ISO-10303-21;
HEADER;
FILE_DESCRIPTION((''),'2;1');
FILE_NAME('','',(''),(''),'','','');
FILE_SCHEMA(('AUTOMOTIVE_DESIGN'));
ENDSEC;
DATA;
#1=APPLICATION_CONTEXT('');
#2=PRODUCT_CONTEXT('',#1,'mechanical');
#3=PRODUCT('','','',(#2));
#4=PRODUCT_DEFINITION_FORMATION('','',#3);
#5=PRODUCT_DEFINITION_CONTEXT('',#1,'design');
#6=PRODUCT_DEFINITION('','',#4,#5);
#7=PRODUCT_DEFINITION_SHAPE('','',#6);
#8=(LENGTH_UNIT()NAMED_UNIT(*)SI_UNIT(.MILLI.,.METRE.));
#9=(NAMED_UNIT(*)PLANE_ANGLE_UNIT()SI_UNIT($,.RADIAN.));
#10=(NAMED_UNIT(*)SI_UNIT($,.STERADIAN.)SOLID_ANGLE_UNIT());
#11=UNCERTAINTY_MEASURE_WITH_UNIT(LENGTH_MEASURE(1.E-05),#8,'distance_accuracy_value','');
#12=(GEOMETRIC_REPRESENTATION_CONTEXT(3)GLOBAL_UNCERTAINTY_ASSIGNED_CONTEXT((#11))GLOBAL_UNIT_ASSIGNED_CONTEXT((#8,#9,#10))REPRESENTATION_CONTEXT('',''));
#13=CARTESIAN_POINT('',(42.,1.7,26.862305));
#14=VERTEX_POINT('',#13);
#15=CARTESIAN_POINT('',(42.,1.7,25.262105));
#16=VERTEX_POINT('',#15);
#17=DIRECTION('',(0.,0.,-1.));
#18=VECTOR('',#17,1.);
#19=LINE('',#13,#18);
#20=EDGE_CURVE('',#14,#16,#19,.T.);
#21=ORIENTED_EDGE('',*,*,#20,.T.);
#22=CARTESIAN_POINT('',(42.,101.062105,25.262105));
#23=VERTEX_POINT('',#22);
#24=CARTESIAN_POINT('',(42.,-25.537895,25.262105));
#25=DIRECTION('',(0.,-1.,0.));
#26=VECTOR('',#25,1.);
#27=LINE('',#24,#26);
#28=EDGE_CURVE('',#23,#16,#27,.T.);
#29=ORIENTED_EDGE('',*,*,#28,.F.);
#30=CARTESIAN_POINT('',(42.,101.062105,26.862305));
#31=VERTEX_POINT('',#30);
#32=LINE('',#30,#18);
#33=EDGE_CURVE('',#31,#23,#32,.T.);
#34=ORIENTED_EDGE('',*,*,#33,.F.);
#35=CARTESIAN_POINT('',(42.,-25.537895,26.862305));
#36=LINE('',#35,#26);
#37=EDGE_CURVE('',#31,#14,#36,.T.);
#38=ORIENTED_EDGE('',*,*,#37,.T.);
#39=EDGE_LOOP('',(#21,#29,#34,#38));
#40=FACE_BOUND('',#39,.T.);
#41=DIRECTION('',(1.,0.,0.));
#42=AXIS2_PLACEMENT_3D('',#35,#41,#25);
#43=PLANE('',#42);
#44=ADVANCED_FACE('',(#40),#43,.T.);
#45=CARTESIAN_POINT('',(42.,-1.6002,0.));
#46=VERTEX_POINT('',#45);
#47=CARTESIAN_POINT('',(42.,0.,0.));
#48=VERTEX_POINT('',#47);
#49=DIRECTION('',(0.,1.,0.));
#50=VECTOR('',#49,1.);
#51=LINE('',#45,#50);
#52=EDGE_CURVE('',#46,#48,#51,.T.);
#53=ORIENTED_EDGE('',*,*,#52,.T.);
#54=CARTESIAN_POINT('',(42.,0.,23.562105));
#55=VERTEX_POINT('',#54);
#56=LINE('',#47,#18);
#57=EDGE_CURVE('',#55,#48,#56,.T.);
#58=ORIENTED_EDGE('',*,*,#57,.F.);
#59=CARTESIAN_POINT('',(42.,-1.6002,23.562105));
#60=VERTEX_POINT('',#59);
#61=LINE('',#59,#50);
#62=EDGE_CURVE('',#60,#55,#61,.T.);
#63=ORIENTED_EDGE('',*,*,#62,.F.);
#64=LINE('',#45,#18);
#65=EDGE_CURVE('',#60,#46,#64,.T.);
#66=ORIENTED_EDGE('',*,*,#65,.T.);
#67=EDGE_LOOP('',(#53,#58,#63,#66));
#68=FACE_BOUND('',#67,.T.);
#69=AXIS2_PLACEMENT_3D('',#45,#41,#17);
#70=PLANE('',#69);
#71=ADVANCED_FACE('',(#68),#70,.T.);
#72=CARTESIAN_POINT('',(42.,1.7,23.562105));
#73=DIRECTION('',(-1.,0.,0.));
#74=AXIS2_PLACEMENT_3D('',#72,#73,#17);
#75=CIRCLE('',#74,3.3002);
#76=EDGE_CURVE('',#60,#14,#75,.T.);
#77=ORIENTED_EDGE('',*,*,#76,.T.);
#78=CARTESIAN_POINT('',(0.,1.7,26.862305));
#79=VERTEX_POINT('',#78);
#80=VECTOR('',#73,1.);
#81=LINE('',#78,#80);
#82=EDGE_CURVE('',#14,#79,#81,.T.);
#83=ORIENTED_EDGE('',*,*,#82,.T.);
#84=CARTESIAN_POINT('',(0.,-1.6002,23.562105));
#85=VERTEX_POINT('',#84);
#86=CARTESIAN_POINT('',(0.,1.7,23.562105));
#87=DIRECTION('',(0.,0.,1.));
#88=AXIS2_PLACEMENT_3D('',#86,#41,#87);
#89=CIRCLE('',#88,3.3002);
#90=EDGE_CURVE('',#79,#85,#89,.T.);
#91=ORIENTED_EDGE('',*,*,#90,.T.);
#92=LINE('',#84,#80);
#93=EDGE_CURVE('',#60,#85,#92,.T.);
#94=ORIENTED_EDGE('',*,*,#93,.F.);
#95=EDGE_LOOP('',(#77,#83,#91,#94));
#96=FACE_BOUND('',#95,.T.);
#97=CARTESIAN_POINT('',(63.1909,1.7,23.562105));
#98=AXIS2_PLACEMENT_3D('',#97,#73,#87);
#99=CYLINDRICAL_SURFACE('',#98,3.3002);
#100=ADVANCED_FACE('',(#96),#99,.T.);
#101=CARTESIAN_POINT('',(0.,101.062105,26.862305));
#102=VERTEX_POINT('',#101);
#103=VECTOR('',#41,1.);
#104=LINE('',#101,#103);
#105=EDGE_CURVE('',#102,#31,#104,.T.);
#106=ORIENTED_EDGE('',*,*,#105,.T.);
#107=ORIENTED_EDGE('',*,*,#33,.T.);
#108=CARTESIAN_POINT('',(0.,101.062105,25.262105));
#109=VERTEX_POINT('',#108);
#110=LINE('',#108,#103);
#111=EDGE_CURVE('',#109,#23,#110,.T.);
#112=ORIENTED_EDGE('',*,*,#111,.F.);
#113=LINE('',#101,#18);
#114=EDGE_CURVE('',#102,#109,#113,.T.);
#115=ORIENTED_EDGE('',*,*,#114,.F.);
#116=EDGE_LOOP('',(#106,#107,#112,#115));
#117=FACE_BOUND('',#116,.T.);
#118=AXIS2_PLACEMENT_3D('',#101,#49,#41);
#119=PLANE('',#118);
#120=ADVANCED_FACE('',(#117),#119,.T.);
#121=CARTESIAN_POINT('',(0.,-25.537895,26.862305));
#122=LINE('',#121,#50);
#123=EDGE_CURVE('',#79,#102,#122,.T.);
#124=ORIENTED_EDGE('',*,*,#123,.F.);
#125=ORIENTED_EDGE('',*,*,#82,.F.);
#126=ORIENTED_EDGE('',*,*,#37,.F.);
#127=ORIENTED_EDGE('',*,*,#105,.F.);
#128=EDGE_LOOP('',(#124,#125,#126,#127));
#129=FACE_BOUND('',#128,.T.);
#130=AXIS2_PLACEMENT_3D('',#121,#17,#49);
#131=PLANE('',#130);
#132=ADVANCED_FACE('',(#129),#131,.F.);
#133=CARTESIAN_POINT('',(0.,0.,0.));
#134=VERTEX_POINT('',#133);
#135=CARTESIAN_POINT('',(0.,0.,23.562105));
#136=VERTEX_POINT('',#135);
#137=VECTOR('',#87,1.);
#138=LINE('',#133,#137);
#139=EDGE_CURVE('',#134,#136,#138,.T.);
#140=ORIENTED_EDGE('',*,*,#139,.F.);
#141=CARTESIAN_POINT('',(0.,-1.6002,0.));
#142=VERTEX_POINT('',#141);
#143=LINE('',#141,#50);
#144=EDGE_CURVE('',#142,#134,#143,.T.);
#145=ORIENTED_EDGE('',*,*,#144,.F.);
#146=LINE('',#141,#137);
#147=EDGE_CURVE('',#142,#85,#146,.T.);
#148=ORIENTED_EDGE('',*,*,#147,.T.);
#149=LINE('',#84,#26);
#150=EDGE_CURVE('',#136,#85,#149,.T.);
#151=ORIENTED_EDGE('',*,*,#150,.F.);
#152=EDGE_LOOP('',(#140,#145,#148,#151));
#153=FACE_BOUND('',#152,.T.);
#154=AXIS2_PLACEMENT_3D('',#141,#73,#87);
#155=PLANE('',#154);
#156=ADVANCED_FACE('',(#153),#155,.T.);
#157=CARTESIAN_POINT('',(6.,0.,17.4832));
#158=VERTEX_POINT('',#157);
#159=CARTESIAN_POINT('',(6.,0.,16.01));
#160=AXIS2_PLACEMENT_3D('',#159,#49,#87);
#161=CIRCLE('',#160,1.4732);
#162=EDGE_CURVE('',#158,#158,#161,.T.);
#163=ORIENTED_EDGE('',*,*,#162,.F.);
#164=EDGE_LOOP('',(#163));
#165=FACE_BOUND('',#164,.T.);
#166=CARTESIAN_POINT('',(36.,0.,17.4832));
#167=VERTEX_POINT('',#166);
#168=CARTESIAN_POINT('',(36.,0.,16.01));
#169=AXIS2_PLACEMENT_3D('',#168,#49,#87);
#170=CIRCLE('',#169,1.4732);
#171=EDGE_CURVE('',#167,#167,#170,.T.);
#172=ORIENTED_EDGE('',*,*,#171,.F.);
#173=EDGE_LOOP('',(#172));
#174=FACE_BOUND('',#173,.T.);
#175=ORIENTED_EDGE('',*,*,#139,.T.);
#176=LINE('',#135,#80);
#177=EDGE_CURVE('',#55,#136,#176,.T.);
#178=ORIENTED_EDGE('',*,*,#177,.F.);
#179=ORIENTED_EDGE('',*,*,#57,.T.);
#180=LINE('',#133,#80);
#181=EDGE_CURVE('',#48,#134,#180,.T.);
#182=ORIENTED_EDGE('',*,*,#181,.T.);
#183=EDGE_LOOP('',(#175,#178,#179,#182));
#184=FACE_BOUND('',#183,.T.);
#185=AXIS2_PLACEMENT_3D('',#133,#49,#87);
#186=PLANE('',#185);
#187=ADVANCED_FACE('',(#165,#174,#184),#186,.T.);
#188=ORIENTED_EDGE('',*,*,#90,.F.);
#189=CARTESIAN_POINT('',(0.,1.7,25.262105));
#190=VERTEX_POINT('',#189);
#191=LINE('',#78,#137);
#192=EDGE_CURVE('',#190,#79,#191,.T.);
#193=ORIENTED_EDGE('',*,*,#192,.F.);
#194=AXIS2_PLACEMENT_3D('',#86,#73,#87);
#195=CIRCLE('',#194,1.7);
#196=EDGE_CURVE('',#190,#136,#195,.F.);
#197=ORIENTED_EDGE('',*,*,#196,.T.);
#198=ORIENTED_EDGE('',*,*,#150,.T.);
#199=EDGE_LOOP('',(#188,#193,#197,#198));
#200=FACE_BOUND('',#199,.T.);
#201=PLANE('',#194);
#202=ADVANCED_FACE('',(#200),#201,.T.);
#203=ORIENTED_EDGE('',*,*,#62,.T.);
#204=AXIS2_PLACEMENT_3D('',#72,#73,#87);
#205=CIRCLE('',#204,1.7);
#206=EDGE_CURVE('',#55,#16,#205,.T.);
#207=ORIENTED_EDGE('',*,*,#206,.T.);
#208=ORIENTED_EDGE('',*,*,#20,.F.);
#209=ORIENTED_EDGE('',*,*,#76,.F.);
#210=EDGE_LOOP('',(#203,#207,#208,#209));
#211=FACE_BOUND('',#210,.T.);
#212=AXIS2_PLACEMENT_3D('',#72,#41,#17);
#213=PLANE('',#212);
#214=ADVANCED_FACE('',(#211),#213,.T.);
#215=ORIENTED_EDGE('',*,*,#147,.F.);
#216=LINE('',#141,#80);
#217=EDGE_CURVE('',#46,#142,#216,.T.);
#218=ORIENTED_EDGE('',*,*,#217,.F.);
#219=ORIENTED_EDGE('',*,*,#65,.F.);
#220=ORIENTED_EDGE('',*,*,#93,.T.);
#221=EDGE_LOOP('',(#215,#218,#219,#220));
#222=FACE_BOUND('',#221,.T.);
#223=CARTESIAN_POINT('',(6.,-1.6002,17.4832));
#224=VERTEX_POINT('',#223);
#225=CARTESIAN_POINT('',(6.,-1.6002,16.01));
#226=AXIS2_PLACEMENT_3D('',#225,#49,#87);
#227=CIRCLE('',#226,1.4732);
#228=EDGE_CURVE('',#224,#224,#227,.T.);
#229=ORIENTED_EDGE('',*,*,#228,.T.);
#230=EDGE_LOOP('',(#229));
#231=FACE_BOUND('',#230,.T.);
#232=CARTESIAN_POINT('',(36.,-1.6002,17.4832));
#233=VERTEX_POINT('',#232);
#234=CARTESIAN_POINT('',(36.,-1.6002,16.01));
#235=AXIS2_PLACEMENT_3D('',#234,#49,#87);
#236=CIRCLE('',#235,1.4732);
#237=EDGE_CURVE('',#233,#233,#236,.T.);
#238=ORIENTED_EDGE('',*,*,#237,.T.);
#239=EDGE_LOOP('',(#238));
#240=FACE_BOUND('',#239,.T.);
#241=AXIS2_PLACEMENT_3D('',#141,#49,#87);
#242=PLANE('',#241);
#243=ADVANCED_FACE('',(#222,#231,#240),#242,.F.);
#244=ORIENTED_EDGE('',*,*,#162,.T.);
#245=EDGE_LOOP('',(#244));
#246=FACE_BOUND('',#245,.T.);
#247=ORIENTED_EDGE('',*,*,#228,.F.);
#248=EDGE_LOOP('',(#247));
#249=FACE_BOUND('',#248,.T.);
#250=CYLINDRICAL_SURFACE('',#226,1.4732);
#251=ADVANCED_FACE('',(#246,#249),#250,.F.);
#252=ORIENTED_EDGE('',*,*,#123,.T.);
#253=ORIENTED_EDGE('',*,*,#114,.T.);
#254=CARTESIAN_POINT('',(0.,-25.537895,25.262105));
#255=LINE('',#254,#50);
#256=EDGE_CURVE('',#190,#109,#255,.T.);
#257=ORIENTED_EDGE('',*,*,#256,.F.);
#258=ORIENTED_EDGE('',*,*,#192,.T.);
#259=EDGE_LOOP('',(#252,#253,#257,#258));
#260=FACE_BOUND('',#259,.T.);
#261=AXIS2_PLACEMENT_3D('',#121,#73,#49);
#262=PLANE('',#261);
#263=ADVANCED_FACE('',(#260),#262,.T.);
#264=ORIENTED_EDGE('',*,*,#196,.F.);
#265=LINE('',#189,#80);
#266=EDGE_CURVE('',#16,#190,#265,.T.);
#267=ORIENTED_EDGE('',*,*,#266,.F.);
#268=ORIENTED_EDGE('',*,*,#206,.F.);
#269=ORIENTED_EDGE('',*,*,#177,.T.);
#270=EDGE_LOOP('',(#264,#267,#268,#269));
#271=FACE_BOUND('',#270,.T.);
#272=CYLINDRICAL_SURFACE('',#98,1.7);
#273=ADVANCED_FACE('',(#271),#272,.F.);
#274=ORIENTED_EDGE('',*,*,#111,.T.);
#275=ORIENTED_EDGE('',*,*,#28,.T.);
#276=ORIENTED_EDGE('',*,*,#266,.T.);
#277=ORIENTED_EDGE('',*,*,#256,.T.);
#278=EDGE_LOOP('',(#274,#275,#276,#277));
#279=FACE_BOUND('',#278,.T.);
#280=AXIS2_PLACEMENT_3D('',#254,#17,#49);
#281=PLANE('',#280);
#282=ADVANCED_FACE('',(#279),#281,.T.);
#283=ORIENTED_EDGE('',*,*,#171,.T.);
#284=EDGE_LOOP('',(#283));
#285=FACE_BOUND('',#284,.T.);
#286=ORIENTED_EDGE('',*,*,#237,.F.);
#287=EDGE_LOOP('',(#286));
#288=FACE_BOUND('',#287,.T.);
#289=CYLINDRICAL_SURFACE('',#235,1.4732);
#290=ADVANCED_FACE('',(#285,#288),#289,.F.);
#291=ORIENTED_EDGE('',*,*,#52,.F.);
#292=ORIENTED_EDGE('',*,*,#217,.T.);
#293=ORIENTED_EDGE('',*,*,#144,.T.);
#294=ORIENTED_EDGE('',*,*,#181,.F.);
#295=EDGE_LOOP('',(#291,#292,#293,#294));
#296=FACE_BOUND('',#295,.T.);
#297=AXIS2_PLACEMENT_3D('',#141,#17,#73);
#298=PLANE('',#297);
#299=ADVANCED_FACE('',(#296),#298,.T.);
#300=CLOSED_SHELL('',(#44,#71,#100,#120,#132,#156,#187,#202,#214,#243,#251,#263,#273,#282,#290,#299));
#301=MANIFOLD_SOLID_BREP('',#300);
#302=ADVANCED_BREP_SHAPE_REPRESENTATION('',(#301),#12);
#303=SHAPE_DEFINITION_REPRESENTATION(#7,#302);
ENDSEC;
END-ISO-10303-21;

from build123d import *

# Parameters (mm, degrees)
SKETCH1_W              = 42
SKETCH1_H              = 126.6
SKETCH1_R              = 1.4732
BASE_FLANGE1_DEPTH     = 1.6002
SKETCHED_BEND1_DEPTH   = 42
SKETCHED_BEND1_2_DEPTH = 42


# Read off the part's stored shape, not the designer's step: Sketched Bend1
# Sheet-metal steps are written as plain solids
with BuildPart() as part:
    # Sketch1 → Base-Flange1 (new body)
    with BuildSketch(Plane(origin=(0, 0, 0), x_dir=(1, 0, 0), z_dir=(0, 1, 0))):
        with Locations((21, -63.3)):
            Rectangle(SKETCH1_W, SKETCH1_H)
        with Locations(Location((6, -16.01, 0), (0, 0, 270))):
            Circle(SKETCH1_R, mode=Mode.SUBTRACT)
        with Locations(Location((36, -16.01, 0), (0, 0, 270))):
            Circle(SKETCH1_R, mode=Mode.SUBTRACT)
    extrude(amount=-BASE_FLANGE1_DEPTH)

    # Sketched Bend1 outline → Sketched Bend1 (cut)
    with BuildSketch(Plane.YZ):
        with BuildLine():
            ThreePointArc((-1.6002, 23.562105466), (-1.172425807, 25.187063933), (0, 26.390765933))
            Line((0, 26.390765933), (0, 126.6))
            Line((0, 126.6), (-1.6002, 126.6))
            Line((-1.6002, 126.6), (-1.6002, 23.562105466))
        make_face()
    extrude(amount=SKETCHED_BEND1_DEPTH, mode=Mode.SUBTRACT)

    # Sketched Bend1 2 outline → Sketched Bend1 2 (add)
    with BuildSketch(Plane.YZ):
        with BuildLine():
            ThreePointArc((0, 23.562105466), (0.497918472, 24.764186994), (1.7, 25.262105466))
            Line((1.7, 25.262105466), (101.062105466, 25.262105466))
            Line((101.062105466, 25.262105466), (101.062105466, 26.862305466))
            Line((101.062105466, 26.862305466), (1.7, 26.862305466))
            ThreePointArc((1.7, 26.862305466), (0.817907384, 26.742236384), (0, 26.390765933))
            Line((0, 26.390765933), (0, 23.562105466))
        make_face()
    extrude(amount=SKETCHED_BEND1_2_DEPTH)


solid = part.part
